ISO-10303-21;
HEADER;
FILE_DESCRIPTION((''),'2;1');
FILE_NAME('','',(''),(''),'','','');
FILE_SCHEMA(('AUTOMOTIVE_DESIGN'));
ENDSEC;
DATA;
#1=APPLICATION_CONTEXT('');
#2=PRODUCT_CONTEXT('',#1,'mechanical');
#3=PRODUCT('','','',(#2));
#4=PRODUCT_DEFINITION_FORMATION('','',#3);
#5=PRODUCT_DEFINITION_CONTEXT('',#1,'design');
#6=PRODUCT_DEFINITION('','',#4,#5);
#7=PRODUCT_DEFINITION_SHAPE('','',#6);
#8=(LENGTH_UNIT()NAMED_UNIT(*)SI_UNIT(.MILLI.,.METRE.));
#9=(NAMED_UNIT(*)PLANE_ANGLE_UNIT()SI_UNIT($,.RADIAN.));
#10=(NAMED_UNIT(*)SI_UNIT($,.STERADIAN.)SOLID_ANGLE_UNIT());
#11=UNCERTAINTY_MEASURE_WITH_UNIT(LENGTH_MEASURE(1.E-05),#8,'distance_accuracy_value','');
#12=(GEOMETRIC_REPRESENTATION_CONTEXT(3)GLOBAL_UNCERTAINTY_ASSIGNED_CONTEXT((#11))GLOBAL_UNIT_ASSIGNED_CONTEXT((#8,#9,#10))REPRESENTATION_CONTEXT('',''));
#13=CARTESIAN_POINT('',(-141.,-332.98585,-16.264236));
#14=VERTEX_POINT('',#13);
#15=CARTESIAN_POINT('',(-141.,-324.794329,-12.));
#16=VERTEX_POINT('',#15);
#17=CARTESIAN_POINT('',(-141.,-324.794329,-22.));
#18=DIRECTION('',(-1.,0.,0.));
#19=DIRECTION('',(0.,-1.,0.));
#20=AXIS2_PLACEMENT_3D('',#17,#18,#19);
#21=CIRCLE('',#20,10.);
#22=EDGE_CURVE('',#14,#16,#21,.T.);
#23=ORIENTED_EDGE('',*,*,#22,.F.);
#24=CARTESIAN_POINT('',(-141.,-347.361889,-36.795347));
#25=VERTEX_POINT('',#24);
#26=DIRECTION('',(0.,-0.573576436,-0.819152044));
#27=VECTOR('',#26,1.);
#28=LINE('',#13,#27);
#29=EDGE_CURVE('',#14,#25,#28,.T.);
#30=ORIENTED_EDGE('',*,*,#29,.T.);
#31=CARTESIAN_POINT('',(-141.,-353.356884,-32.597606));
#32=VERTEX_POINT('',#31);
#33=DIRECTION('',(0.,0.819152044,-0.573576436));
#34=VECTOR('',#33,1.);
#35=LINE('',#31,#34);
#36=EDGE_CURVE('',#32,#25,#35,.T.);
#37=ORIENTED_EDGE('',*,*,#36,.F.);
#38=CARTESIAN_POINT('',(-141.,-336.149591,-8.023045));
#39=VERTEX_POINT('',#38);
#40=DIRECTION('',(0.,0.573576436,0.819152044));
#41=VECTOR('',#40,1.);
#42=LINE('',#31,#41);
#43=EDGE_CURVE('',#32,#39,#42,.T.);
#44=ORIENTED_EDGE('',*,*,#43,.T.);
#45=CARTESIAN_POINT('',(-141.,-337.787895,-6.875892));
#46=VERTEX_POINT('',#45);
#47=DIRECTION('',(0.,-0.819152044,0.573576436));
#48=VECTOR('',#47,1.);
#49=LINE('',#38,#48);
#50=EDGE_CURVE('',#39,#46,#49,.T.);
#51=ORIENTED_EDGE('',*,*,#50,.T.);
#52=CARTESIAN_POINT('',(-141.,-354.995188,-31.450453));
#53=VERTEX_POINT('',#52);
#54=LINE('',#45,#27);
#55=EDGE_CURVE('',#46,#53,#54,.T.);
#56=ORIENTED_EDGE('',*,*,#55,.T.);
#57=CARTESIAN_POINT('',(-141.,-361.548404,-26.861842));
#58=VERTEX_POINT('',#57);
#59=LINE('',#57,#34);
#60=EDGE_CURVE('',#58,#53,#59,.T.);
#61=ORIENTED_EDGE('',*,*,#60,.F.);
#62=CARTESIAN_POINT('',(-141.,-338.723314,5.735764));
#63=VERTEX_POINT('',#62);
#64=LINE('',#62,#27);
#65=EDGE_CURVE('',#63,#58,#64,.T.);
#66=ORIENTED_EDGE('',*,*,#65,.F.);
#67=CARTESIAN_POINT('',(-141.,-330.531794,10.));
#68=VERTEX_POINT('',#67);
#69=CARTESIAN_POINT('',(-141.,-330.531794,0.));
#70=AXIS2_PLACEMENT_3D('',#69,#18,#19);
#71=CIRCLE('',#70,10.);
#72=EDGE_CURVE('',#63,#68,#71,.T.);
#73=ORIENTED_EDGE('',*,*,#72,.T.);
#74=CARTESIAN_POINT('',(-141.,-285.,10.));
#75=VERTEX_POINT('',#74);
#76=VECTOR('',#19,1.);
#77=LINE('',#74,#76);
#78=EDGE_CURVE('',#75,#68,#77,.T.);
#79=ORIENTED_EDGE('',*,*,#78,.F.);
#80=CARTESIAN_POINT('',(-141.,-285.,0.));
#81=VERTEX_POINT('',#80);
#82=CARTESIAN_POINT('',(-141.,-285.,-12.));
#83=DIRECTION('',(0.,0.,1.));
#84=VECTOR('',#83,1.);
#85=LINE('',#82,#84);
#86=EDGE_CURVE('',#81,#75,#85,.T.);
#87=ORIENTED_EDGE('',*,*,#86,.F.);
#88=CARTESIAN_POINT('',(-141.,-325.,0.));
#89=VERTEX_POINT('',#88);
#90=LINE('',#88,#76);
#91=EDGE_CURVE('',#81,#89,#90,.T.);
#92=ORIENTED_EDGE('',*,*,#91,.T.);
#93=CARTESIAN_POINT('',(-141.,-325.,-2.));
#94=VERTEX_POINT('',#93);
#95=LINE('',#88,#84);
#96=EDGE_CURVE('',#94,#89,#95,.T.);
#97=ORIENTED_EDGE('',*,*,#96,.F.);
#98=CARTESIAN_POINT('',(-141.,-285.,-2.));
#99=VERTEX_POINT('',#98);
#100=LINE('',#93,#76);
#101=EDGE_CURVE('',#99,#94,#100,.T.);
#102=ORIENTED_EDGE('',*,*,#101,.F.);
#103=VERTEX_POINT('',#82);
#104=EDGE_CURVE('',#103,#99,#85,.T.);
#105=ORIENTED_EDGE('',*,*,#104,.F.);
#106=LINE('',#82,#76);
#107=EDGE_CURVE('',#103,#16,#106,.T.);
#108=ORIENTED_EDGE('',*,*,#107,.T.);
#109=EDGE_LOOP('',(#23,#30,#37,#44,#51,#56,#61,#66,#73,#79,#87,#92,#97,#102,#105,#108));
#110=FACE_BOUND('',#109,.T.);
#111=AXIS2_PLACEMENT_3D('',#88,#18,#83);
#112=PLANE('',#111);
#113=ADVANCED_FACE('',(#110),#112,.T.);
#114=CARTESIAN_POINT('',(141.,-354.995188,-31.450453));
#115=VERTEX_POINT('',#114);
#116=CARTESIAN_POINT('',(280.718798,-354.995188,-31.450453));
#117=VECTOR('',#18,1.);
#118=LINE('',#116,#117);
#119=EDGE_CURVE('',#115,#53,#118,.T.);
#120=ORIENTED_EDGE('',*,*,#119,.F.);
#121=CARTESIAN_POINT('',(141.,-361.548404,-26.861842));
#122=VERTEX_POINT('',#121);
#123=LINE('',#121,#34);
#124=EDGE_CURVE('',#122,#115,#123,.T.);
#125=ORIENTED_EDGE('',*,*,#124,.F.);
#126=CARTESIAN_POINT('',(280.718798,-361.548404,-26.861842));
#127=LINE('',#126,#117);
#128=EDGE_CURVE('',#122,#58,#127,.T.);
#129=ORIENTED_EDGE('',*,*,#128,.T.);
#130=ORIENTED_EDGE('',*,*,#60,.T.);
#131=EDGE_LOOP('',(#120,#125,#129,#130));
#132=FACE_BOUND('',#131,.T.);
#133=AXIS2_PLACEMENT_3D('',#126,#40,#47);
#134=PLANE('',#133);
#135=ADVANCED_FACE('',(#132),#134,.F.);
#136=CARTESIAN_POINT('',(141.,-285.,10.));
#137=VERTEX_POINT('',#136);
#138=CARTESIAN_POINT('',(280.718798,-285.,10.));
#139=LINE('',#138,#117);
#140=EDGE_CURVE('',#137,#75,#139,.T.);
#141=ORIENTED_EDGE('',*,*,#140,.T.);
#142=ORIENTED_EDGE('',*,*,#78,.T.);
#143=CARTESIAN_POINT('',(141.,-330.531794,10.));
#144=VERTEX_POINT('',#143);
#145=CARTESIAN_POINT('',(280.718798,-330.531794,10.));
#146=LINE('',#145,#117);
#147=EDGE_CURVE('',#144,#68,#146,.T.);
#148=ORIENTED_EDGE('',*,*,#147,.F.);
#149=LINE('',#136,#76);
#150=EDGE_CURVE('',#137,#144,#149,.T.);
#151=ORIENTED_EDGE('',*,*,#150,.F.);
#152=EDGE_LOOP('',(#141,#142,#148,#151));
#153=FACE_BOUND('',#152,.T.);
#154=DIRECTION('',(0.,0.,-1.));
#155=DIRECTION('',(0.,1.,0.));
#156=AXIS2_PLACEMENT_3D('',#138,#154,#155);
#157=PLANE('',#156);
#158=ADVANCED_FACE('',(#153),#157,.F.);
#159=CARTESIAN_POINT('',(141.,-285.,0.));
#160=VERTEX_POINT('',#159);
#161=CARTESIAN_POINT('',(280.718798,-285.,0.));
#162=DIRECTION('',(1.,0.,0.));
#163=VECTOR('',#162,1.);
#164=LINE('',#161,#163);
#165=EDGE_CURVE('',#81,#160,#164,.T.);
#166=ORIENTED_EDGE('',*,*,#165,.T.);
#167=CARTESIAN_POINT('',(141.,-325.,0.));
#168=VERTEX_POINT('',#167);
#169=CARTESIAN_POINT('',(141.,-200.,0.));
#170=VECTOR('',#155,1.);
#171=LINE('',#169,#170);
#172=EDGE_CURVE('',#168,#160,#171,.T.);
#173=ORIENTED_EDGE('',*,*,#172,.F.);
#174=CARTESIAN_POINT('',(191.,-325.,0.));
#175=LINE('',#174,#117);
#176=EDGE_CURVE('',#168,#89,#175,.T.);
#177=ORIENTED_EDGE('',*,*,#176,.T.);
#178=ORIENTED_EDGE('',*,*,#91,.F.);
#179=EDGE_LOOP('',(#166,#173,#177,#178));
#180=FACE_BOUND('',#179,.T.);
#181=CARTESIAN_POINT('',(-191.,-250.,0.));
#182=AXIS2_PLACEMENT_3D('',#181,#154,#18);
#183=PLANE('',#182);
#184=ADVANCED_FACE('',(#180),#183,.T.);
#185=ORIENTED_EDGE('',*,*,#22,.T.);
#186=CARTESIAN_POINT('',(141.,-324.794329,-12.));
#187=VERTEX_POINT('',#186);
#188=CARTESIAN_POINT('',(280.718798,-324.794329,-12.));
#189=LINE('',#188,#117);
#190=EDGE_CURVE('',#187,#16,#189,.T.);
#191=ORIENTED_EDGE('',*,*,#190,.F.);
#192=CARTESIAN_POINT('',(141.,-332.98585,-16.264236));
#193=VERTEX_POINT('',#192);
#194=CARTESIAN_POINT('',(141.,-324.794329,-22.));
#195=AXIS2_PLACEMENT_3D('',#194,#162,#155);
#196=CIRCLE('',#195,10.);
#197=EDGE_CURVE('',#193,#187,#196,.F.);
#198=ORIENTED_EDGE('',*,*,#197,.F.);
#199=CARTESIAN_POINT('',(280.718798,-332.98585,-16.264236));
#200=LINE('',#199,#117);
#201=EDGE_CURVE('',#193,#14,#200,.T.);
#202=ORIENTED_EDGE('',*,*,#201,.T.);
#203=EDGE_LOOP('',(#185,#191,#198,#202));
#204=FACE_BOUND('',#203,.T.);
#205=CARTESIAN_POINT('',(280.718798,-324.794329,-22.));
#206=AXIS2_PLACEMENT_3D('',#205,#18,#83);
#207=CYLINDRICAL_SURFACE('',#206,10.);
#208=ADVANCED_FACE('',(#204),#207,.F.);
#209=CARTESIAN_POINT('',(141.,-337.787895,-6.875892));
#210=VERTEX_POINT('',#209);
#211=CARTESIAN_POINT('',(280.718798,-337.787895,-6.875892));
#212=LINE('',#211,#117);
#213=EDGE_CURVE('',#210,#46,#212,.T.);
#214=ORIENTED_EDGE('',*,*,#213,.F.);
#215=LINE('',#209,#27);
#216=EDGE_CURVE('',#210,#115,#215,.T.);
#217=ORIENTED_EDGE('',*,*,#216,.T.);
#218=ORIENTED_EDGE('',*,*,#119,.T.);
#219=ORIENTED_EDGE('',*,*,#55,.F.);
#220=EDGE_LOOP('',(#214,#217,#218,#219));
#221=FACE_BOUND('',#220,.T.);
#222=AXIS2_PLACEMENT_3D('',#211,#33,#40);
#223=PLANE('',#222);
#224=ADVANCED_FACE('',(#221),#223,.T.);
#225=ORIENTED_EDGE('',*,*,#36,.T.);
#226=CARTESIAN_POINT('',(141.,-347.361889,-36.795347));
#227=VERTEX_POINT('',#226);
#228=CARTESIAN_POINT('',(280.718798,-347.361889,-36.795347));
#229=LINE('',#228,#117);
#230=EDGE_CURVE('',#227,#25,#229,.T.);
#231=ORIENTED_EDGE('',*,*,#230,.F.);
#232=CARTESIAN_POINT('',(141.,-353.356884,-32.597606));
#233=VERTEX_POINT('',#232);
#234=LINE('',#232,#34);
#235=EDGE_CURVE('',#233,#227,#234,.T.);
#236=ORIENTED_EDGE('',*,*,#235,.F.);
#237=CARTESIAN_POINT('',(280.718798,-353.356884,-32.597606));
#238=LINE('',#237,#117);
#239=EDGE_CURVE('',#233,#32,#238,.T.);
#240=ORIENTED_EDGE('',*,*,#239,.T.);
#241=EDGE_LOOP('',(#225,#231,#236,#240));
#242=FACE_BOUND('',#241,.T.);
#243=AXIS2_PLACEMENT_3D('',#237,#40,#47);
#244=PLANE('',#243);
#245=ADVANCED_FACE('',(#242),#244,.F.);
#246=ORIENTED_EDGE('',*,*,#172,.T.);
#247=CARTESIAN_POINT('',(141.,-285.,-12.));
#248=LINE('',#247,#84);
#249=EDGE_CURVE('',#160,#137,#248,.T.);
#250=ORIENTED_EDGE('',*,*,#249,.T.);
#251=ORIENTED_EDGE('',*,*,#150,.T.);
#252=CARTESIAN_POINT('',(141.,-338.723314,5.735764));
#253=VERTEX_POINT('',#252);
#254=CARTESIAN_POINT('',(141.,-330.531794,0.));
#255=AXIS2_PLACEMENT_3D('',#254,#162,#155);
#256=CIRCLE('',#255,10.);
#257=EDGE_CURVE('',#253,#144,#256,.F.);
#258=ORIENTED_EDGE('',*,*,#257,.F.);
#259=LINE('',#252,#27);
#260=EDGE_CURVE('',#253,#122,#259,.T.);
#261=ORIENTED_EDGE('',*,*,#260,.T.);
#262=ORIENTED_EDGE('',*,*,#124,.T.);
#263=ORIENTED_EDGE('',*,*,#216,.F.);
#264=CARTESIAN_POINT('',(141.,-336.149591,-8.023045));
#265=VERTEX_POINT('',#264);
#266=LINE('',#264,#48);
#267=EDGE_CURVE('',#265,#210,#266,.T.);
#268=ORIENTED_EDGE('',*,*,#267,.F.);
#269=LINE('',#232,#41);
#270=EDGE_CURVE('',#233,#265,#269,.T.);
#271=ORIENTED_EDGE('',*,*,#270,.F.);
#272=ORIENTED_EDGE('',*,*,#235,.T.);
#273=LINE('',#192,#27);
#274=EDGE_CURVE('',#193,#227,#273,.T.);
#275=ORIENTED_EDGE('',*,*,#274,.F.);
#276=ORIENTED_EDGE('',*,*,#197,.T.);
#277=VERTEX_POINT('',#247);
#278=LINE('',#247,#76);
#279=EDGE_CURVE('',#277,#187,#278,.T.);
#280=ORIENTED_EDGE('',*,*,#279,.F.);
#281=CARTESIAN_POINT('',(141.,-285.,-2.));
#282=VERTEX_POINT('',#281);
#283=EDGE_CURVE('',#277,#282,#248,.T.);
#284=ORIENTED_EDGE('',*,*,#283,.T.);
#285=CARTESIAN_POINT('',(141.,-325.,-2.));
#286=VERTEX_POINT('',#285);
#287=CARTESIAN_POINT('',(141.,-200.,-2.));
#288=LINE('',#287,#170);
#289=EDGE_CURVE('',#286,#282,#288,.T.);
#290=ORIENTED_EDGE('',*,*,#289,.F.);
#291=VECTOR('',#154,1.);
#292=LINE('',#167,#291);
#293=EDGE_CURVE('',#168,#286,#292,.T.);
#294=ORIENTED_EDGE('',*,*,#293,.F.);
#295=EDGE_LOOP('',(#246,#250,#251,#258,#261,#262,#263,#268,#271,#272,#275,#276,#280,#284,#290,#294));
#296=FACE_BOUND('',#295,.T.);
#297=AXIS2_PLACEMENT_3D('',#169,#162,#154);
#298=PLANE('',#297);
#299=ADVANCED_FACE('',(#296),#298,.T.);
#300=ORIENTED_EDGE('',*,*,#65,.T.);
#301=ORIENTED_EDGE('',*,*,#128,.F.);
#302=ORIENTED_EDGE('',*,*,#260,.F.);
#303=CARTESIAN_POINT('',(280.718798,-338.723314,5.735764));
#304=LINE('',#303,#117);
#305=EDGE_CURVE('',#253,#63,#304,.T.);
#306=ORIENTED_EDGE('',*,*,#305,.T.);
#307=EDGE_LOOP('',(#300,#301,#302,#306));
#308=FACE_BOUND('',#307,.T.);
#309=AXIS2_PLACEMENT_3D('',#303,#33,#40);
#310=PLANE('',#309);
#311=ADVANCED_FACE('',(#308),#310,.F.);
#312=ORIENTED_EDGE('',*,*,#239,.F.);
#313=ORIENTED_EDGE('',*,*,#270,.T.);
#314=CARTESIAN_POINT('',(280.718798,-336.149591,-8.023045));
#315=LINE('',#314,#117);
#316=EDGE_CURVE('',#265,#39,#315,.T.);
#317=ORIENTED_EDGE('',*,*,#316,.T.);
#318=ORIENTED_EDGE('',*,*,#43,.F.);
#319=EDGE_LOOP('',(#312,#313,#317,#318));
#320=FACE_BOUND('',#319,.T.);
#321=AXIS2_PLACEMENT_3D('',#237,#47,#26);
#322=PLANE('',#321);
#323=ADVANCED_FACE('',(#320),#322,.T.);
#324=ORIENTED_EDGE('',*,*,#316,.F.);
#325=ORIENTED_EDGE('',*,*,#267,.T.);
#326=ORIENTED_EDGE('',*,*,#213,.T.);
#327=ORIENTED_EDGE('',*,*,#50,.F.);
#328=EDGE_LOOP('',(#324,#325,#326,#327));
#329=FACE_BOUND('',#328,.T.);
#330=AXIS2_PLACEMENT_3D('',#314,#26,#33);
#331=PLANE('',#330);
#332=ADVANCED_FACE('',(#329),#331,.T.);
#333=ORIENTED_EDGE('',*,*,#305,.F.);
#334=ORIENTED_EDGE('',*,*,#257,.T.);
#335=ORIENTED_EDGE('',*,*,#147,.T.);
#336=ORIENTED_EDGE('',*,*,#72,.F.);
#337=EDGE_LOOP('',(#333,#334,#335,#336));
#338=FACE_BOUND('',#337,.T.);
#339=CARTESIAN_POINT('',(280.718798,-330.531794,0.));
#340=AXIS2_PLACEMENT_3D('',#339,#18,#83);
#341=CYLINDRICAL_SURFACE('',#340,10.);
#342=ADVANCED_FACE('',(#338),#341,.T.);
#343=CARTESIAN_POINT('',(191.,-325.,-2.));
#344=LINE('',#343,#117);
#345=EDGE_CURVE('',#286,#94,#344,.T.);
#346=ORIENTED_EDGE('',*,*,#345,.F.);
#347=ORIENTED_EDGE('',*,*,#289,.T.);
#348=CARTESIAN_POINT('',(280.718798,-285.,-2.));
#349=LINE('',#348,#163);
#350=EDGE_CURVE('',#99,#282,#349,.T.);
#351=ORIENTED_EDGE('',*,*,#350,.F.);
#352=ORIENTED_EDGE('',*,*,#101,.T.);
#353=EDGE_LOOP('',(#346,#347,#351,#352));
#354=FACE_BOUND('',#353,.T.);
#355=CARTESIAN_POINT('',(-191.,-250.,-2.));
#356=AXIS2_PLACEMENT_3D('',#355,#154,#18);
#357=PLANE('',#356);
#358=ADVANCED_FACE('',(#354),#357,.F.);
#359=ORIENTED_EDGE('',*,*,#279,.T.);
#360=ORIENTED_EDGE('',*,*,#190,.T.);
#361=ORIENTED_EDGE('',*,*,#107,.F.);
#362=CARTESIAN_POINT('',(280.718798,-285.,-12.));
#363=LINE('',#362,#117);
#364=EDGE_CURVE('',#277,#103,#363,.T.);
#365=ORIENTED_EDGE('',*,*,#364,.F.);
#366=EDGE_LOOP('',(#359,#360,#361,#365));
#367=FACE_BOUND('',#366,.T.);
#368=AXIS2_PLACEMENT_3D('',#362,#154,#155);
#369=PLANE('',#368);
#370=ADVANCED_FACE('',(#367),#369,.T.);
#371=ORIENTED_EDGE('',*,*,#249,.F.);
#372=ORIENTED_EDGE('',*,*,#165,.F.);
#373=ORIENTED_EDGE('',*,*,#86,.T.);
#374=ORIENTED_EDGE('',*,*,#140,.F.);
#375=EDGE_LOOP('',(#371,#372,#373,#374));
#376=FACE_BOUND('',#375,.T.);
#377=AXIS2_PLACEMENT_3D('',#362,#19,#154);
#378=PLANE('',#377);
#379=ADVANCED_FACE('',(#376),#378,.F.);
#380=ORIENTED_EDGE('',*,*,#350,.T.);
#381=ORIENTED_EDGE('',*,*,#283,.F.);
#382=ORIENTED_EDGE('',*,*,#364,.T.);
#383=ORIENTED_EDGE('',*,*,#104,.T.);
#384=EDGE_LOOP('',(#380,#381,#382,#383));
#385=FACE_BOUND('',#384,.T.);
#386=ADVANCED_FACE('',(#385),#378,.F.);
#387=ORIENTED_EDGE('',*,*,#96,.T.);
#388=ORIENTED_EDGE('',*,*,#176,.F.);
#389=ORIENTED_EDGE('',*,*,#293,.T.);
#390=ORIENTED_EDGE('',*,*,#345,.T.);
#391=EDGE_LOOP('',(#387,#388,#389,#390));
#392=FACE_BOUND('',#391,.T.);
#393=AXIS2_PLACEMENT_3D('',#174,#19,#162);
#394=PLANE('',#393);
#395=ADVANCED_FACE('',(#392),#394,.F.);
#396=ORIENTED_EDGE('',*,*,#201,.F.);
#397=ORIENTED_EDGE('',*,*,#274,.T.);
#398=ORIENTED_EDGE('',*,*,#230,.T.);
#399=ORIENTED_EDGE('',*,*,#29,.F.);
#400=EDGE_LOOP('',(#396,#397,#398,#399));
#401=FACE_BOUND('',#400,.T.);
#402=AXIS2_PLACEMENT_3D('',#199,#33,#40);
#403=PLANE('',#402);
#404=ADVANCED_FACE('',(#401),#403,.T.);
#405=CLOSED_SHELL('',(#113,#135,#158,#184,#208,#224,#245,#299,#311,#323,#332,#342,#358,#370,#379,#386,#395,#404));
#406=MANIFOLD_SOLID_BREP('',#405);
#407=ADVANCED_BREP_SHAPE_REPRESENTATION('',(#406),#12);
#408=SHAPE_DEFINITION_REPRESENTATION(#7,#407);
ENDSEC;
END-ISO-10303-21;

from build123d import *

# Parameters (mm, degrees)
BOSS_EXTRUDE1_DEPTH      = 141
BOSS_EXTRUDE1_DEPTH_BACK = 141
CAVITY1_START            = -2
CAVITY1_OUTLINE_W        = 282
CAVITY1_OUTLINE_H        = 40
CAVITY1_DEPTH            = 2


# Read off the part's stored shape, not the designer's step: Cavity1
with BuildPart() as part:
    # Sketch1 → Boss-Extrude1 (new, two sides: drawn at the far end of the back side and taken through both)
    with BuildSketch(Plane(origin=(0, 0, 0), x_dir=(0, 0, -1), z_dir=(1, 0, 0)).offset(-BOSS_EXTRUDE1_DEPTH_BACK)):
        with BuildLine():
            Line((12, -285), (-10, -285))
            Line((-10, -285), (-10, -330.531793911))
            ThreePointArc((-10, -330.531793911), (-8.870108332, -335.149280044), (-5.735764364, -338.723314354))
            Line((-5.735764364, -338.723314354), (26.861841993, -361.548404053))
            Line((26.861841993, -361.548404053), (31.450453484, -354.995187698))
            Line((31.450453484, -354.995187698), (6.875892155, -337.787894608))
            Line((6.875892155, -337.787894608), (8.023045028, -336.149590519))
            Line((8.023045028, -336.149590519), (32.597606357, -353.35688361))
            Line((32.597606357, -353.35688361), (36.795346904, -347.361888815))
            Line((36.795346904, -347.361888815), (16.264235636, -332.985849937))
            ThreePointArc((16.264235636, -332.985849937), (13.129891668, -329.411815627), (12, -324.794329494))
            Line((12, -324.794329494), (12, -285))
        make_face()
    extrude(amount=BOSS_EXTRUDE1_DEPTH + BOSS_EXTRUDE1_DEPTH_BACK)

    # Cavity1 outline → Cavity1 (cut)
    with BuildSketch(Plane.XY.offset(CAVITY1_START)):
        with Locations((0, -305)):
            Rectangle(CAVITY1_OUTLINE_W, CAVITY1_OUTLINE_H)
    extrude(amount=CAVITY1_DEPTH, mode=Mode.SUBTRACT)


solid = part.part
